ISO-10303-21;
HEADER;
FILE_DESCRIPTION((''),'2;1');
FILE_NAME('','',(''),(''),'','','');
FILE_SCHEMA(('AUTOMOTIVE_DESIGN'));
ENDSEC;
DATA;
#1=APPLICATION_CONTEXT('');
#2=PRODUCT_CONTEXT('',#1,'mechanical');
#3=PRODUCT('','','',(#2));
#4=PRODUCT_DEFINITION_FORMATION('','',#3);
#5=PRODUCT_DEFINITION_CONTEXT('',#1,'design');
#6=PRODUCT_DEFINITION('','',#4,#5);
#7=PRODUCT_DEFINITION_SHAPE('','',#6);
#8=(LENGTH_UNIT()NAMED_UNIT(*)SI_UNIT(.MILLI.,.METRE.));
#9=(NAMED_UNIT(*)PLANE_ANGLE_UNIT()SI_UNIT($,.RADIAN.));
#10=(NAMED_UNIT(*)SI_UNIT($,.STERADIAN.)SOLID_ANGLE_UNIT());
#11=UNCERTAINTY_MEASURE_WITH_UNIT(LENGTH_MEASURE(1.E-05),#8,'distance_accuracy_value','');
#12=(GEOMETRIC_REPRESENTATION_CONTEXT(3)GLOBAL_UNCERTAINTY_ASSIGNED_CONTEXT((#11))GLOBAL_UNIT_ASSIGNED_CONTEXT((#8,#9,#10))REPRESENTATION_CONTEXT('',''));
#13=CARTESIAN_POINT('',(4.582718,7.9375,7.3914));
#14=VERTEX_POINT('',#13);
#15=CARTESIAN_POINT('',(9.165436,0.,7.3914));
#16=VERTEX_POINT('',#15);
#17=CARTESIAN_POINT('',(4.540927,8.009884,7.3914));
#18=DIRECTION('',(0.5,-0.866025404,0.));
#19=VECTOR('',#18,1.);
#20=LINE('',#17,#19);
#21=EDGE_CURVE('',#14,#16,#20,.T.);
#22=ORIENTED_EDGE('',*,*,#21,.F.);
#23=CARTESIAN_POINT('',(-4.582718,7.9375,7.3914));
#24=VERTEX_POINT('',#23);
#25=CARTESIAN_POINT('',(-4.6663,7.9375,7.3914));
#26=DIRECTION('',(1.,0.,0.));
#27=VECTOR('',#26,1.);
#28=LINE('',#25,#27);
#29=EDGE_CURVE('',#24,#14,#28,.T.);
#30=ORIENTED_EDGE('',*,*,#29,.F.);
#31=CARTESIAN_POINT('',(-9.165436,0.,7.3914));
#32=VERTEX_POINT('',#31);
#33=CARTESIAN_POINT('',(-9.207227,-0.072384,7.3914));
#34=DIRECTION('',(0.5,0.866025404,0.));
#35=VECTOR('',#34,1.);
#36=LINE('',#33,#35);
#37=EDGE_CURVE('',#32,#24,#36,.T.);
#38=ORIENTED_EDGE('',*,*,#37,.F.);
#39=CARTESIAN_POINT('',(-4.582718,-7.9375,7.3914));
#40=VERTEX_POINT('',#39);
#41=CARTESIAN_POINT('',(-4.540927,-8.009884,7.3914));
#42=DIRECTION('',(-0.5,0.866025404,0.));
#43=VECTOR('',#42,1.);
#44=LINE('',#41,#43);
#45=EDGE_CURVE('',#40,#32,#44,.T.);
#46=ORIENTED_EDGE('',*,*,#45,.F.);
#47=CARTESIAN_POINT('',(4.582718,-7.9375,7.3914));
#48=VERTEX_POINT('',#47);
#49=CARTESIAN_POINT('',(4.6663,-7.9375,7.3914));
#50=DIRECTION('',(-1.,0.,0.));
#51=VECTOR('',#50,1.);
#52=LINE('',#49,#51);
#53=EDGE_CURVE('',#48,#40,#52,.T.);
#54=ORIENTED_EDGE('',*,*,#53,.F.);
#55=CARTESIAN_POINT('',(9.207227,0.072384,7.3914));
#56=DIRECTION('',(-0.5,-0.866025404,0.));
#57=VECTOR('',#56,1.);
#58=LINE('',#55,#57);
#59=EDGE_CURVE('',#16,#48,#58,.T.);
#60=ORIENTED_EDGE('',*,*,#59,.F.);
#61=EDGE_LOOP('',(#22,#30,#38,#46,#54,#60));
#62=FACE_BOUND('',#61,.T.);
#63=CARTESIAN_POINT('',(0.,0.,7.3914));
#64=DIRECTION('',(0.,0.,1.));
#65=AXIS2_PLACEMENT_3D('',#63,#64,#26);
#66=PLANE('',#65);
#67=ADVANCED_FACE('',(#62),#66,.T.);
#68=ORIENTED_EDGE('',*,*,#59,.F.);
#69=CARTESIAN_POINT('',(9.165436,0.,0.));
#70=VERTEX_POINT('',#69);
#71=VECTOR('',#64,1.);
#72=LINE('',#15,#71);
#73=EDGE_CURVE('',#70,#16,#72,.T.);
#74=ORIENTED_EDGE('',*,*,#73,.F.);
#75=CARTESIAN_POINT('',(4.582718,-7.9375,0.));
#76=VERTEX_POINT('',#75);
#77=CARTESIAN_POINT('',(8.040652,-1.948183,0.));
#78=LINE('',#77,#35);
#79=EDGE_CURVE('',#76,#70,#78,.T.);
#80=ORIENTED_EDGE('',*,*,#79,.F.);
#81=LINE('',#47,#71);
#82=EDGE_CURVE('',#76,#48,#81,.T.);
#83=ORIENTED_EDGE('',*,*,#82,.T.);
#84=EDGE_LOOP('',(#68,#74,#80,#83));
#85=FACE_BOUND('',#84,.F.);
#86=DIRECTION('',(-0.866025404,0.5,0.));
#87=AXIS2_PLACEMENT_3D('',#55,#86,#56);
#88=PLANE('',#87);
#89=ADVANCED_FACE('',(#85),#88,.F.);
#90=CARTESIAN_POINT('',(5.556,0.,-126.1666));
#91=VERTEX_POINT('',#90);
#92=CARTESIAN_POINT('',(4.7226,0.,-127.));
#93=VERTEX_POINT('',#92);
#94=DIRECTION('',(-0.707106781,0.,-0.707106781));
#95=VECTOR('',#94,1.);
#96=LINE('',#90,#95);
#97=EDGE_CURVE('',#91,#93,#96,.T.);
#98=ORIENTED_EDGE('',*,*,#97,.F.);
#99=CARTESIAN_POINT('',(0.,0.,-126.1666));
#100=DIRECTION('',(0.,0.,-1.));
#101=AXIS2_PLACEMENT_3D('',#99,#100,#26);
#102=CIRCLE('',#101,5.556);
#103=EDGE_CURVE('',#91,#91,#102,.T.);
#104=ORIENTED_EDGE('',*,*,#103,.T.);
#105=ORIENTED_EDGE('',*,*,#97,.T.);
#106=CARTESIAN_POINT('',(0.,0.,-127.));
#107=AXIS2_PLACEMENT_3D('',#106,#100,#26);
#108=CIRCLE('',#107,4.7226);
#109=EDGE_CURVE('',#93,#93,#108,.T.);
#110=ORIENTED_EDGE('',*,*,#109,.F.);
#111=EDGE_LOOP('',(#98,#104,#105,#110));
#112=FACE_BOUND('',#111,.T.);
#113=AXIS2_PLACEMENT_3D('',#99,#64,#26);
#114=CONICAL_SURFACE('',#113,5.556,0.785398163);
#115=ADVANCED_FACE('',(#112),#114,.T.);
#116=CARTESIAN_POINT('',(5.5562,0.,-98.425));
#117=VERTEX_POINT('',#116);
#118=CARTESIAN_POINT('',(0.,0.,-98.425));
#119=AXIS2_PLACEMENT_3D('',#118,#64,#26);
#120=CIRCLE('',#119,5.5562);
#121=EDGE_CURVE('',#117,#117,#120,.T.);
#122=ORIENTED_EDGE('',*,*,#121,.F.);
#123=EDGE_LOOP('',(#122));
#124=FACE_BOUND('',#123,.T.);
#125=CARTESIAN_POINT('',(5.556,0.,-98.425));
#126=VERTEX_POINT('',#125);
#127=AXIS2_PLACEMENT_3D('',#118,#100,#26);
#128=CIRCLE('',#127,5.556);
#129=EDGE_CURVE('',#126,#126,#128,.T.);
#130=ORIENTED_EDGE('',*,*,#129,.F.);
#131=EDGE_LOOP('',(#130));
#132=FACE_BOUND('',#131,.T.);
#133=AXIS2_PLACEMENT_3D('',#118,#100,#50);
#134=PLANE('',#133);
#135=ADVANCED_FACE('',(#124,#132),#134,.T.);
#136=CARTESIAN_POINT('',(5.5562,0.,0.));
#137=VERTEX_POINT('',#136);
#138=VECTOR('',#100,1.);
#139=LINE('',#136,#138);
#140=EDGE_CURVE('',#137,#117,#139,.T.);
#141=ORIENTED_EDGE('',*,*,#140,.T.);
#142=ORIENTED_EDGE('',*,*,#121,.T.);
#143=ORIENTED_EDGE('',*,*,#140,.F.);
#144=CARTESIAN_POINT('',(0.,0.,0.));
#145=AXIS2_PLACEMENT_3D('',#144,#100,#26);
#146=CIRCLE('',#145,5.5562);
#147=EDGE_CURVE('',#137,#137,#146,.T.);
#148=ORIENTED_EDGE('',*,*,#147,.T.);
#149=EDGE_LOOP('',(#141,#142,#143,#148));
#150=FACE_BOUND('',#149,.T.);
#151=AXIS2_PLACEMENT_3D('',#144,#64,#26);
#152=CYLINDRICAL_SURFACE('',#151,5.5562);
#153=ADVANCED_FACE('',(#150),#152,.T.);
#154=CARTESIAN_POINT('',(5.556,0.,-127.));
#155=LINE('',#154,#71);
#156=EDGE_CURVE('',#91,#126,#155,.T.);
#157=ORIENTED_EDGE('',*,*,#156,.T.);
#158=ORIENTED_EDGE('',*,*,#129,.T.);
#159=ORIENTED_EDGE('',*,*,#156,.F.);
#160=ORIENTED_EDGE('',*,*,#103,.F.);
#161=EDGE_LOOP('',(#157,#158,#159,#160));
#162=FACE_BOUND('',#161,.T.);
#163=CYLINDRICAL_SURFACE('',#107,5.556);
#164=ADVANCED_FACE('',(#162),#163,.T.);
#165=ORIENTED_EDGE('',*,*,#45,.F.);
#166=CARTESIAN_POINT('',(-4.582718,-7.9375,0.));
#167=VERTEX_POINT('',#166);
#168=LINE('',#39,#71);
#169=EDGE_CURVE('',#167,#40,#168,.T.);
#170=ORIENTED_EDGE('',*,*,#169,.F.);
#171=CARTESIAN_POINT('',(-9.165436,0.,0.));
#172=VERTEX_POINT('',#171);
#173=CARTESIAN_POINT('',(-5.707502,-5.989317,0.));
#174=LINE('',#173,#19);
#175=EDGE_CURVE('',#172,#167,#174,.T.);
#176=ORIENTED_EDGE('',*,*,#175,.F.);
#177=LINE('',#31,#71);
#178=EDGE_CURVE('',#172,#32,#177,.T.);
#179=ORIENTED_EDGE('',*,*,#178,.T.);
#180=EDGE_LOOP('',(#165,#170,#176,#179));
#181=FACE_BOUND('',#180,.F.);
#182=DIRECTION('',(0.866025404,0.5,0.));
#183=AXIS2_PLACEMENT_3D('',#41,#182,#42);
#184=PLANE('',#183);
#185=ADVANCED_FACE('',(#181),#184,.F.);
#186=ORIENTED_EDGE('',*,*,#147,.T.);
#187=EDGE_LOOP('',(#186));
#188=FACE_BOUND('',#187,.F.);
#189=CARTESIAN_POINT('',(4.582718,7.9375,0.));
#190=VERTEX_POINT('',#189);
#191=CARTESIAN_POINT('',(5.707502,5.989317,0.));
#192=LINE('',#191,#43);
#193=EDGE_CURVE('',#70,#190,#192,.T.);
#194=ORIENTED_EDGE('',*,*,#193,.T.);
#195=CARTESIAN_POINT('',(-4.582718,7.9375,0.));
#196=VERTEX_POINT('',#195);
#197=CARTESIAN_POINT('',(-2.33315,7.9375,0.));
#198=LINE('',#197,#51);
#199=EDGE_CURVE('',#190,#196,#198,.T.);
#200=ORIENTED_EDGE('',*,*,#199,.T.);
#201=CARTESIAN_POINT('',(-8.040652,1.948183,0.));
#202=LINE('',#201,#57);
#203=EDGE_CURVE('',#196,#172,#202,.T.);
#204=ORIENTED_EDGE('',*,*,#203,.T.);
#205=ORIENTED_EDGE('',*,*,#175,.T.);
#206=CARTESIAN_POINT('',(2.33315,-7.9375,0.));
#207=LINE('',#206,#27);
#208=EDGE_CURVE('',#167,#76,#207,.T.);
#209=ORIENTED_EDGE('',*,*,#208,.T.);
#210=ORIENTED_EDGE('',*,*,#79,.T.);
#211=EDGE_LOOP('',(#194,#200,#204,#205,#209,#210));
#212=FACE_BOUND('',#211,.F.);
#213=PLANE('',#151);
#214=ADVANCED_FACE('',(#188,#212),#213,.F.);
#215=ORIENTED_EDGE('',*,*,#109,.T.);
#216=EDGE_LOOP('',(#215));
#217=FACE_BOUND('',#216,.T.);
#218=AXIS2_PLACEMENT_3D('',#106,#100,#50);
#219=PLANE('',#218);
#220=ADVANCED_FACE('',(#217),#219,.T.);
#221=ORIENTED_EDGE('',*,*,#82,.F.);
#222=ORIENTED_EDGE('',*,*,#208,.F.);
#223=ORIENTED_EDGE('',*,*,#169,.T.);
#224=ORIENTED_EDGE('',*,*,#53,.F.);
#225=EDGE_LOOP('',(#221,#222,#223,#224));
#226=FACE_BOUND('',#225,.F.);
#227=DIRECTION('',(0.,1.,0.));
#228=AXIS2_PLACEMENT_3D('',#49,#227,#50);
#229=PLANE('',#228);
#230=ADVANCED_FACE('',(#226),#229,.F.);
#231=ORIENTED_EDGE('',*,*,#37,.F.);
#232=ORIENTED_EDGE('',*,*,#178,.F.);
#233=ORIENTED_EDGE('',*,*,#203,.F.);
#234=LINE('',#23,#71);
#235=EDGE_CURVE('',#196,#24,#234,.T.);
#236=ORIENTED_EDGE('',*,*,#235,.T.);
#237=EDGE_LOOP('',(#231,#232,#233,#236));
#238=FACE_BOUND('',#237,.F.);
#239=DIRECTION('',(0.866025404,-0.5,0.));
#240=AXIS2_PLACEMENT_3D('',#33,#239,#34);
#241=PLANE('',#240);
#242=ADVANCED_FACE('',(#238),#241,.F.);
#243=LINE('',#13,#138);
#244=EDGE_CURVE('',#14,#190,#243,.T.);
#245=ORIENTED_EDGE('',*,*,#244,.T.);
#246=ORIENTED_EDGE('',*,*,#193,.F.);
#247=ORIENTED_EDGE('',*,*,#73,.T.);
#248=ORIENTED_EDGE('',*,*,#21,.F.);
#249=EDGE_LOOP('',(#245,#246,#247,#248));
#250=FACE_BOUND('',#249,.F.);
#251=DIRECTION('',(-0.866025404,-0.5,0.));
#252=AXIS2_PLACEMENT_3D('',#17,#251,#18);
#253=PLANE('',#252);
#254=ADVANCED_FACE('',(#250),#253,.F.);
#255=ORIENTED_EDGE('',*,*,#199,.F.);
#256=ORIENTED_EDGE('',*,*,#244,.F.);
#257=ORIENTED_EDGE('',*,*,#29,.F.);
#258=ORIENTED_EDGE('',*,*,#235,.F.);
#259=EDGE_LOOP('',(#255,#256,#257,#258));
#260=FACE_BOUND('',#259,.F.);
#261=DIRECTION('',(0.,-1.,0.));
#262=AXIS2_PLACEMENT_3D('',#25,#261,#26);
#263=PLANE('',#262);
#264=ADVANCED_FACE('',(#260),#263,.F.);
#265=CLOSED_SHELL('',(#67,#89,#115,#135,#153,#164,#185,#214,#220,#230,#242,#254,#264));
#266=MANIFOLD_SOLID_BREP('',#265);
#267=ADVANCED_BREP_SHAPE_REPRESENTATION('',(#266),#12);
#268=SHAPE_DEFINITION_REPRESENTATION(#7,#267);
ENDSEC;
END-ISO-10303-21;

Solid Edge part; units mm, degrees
sketch "Sketch1" plane through (0, 0, 0) normal (0, 0, 1) x (1, 0, 0)
  circle A0 centre (0, 0) radius 9.2075
  dimension "D1" = 18.415
extrude "Protrusion1" add sketch "Sketch1" along normal blind 7.3914
sketch "Sketch2" plane through (0, 0, 0) normal (0, 0, -1) x (1, 0, 0)
  circle A0 centre (0, 0) radius 5.5562
extrude "Protrusion2" add sketch "Sketch2" along normal blind 127
sketch "Sketch3" plane through (0, 0, -127) normal (0, 0, -1) x (1, 0, 0)
  circle A0 centre (0, 0) radius 5.556
extrude "Cutout1" cut sketch "Sketch3" against normal blind 28.575 flip side to cut
chamfer "Chamfer_1" distance 0.8334 angle 45 1 edges at (-5.556, 0, -127)
sketch "Sketch4" plane through (0, 0, 7.3914) normal (0, 0, 1) x (1, 0, 0)
  line L0 (-4.6663, 7.9375) -> (4.6663, 7.9375)
  dimension "D1" = 15.875
extrude "Cutout2" cut sketch "Sketch4" against normal up to next material side at (0, 7.9875, 7.3914)
pattern_circular "Pattern1" count 6 over 360 about axis through (0, 0, 7.3914) along (0, 0, 1) of "Cutout2"
properties part number "140897"
